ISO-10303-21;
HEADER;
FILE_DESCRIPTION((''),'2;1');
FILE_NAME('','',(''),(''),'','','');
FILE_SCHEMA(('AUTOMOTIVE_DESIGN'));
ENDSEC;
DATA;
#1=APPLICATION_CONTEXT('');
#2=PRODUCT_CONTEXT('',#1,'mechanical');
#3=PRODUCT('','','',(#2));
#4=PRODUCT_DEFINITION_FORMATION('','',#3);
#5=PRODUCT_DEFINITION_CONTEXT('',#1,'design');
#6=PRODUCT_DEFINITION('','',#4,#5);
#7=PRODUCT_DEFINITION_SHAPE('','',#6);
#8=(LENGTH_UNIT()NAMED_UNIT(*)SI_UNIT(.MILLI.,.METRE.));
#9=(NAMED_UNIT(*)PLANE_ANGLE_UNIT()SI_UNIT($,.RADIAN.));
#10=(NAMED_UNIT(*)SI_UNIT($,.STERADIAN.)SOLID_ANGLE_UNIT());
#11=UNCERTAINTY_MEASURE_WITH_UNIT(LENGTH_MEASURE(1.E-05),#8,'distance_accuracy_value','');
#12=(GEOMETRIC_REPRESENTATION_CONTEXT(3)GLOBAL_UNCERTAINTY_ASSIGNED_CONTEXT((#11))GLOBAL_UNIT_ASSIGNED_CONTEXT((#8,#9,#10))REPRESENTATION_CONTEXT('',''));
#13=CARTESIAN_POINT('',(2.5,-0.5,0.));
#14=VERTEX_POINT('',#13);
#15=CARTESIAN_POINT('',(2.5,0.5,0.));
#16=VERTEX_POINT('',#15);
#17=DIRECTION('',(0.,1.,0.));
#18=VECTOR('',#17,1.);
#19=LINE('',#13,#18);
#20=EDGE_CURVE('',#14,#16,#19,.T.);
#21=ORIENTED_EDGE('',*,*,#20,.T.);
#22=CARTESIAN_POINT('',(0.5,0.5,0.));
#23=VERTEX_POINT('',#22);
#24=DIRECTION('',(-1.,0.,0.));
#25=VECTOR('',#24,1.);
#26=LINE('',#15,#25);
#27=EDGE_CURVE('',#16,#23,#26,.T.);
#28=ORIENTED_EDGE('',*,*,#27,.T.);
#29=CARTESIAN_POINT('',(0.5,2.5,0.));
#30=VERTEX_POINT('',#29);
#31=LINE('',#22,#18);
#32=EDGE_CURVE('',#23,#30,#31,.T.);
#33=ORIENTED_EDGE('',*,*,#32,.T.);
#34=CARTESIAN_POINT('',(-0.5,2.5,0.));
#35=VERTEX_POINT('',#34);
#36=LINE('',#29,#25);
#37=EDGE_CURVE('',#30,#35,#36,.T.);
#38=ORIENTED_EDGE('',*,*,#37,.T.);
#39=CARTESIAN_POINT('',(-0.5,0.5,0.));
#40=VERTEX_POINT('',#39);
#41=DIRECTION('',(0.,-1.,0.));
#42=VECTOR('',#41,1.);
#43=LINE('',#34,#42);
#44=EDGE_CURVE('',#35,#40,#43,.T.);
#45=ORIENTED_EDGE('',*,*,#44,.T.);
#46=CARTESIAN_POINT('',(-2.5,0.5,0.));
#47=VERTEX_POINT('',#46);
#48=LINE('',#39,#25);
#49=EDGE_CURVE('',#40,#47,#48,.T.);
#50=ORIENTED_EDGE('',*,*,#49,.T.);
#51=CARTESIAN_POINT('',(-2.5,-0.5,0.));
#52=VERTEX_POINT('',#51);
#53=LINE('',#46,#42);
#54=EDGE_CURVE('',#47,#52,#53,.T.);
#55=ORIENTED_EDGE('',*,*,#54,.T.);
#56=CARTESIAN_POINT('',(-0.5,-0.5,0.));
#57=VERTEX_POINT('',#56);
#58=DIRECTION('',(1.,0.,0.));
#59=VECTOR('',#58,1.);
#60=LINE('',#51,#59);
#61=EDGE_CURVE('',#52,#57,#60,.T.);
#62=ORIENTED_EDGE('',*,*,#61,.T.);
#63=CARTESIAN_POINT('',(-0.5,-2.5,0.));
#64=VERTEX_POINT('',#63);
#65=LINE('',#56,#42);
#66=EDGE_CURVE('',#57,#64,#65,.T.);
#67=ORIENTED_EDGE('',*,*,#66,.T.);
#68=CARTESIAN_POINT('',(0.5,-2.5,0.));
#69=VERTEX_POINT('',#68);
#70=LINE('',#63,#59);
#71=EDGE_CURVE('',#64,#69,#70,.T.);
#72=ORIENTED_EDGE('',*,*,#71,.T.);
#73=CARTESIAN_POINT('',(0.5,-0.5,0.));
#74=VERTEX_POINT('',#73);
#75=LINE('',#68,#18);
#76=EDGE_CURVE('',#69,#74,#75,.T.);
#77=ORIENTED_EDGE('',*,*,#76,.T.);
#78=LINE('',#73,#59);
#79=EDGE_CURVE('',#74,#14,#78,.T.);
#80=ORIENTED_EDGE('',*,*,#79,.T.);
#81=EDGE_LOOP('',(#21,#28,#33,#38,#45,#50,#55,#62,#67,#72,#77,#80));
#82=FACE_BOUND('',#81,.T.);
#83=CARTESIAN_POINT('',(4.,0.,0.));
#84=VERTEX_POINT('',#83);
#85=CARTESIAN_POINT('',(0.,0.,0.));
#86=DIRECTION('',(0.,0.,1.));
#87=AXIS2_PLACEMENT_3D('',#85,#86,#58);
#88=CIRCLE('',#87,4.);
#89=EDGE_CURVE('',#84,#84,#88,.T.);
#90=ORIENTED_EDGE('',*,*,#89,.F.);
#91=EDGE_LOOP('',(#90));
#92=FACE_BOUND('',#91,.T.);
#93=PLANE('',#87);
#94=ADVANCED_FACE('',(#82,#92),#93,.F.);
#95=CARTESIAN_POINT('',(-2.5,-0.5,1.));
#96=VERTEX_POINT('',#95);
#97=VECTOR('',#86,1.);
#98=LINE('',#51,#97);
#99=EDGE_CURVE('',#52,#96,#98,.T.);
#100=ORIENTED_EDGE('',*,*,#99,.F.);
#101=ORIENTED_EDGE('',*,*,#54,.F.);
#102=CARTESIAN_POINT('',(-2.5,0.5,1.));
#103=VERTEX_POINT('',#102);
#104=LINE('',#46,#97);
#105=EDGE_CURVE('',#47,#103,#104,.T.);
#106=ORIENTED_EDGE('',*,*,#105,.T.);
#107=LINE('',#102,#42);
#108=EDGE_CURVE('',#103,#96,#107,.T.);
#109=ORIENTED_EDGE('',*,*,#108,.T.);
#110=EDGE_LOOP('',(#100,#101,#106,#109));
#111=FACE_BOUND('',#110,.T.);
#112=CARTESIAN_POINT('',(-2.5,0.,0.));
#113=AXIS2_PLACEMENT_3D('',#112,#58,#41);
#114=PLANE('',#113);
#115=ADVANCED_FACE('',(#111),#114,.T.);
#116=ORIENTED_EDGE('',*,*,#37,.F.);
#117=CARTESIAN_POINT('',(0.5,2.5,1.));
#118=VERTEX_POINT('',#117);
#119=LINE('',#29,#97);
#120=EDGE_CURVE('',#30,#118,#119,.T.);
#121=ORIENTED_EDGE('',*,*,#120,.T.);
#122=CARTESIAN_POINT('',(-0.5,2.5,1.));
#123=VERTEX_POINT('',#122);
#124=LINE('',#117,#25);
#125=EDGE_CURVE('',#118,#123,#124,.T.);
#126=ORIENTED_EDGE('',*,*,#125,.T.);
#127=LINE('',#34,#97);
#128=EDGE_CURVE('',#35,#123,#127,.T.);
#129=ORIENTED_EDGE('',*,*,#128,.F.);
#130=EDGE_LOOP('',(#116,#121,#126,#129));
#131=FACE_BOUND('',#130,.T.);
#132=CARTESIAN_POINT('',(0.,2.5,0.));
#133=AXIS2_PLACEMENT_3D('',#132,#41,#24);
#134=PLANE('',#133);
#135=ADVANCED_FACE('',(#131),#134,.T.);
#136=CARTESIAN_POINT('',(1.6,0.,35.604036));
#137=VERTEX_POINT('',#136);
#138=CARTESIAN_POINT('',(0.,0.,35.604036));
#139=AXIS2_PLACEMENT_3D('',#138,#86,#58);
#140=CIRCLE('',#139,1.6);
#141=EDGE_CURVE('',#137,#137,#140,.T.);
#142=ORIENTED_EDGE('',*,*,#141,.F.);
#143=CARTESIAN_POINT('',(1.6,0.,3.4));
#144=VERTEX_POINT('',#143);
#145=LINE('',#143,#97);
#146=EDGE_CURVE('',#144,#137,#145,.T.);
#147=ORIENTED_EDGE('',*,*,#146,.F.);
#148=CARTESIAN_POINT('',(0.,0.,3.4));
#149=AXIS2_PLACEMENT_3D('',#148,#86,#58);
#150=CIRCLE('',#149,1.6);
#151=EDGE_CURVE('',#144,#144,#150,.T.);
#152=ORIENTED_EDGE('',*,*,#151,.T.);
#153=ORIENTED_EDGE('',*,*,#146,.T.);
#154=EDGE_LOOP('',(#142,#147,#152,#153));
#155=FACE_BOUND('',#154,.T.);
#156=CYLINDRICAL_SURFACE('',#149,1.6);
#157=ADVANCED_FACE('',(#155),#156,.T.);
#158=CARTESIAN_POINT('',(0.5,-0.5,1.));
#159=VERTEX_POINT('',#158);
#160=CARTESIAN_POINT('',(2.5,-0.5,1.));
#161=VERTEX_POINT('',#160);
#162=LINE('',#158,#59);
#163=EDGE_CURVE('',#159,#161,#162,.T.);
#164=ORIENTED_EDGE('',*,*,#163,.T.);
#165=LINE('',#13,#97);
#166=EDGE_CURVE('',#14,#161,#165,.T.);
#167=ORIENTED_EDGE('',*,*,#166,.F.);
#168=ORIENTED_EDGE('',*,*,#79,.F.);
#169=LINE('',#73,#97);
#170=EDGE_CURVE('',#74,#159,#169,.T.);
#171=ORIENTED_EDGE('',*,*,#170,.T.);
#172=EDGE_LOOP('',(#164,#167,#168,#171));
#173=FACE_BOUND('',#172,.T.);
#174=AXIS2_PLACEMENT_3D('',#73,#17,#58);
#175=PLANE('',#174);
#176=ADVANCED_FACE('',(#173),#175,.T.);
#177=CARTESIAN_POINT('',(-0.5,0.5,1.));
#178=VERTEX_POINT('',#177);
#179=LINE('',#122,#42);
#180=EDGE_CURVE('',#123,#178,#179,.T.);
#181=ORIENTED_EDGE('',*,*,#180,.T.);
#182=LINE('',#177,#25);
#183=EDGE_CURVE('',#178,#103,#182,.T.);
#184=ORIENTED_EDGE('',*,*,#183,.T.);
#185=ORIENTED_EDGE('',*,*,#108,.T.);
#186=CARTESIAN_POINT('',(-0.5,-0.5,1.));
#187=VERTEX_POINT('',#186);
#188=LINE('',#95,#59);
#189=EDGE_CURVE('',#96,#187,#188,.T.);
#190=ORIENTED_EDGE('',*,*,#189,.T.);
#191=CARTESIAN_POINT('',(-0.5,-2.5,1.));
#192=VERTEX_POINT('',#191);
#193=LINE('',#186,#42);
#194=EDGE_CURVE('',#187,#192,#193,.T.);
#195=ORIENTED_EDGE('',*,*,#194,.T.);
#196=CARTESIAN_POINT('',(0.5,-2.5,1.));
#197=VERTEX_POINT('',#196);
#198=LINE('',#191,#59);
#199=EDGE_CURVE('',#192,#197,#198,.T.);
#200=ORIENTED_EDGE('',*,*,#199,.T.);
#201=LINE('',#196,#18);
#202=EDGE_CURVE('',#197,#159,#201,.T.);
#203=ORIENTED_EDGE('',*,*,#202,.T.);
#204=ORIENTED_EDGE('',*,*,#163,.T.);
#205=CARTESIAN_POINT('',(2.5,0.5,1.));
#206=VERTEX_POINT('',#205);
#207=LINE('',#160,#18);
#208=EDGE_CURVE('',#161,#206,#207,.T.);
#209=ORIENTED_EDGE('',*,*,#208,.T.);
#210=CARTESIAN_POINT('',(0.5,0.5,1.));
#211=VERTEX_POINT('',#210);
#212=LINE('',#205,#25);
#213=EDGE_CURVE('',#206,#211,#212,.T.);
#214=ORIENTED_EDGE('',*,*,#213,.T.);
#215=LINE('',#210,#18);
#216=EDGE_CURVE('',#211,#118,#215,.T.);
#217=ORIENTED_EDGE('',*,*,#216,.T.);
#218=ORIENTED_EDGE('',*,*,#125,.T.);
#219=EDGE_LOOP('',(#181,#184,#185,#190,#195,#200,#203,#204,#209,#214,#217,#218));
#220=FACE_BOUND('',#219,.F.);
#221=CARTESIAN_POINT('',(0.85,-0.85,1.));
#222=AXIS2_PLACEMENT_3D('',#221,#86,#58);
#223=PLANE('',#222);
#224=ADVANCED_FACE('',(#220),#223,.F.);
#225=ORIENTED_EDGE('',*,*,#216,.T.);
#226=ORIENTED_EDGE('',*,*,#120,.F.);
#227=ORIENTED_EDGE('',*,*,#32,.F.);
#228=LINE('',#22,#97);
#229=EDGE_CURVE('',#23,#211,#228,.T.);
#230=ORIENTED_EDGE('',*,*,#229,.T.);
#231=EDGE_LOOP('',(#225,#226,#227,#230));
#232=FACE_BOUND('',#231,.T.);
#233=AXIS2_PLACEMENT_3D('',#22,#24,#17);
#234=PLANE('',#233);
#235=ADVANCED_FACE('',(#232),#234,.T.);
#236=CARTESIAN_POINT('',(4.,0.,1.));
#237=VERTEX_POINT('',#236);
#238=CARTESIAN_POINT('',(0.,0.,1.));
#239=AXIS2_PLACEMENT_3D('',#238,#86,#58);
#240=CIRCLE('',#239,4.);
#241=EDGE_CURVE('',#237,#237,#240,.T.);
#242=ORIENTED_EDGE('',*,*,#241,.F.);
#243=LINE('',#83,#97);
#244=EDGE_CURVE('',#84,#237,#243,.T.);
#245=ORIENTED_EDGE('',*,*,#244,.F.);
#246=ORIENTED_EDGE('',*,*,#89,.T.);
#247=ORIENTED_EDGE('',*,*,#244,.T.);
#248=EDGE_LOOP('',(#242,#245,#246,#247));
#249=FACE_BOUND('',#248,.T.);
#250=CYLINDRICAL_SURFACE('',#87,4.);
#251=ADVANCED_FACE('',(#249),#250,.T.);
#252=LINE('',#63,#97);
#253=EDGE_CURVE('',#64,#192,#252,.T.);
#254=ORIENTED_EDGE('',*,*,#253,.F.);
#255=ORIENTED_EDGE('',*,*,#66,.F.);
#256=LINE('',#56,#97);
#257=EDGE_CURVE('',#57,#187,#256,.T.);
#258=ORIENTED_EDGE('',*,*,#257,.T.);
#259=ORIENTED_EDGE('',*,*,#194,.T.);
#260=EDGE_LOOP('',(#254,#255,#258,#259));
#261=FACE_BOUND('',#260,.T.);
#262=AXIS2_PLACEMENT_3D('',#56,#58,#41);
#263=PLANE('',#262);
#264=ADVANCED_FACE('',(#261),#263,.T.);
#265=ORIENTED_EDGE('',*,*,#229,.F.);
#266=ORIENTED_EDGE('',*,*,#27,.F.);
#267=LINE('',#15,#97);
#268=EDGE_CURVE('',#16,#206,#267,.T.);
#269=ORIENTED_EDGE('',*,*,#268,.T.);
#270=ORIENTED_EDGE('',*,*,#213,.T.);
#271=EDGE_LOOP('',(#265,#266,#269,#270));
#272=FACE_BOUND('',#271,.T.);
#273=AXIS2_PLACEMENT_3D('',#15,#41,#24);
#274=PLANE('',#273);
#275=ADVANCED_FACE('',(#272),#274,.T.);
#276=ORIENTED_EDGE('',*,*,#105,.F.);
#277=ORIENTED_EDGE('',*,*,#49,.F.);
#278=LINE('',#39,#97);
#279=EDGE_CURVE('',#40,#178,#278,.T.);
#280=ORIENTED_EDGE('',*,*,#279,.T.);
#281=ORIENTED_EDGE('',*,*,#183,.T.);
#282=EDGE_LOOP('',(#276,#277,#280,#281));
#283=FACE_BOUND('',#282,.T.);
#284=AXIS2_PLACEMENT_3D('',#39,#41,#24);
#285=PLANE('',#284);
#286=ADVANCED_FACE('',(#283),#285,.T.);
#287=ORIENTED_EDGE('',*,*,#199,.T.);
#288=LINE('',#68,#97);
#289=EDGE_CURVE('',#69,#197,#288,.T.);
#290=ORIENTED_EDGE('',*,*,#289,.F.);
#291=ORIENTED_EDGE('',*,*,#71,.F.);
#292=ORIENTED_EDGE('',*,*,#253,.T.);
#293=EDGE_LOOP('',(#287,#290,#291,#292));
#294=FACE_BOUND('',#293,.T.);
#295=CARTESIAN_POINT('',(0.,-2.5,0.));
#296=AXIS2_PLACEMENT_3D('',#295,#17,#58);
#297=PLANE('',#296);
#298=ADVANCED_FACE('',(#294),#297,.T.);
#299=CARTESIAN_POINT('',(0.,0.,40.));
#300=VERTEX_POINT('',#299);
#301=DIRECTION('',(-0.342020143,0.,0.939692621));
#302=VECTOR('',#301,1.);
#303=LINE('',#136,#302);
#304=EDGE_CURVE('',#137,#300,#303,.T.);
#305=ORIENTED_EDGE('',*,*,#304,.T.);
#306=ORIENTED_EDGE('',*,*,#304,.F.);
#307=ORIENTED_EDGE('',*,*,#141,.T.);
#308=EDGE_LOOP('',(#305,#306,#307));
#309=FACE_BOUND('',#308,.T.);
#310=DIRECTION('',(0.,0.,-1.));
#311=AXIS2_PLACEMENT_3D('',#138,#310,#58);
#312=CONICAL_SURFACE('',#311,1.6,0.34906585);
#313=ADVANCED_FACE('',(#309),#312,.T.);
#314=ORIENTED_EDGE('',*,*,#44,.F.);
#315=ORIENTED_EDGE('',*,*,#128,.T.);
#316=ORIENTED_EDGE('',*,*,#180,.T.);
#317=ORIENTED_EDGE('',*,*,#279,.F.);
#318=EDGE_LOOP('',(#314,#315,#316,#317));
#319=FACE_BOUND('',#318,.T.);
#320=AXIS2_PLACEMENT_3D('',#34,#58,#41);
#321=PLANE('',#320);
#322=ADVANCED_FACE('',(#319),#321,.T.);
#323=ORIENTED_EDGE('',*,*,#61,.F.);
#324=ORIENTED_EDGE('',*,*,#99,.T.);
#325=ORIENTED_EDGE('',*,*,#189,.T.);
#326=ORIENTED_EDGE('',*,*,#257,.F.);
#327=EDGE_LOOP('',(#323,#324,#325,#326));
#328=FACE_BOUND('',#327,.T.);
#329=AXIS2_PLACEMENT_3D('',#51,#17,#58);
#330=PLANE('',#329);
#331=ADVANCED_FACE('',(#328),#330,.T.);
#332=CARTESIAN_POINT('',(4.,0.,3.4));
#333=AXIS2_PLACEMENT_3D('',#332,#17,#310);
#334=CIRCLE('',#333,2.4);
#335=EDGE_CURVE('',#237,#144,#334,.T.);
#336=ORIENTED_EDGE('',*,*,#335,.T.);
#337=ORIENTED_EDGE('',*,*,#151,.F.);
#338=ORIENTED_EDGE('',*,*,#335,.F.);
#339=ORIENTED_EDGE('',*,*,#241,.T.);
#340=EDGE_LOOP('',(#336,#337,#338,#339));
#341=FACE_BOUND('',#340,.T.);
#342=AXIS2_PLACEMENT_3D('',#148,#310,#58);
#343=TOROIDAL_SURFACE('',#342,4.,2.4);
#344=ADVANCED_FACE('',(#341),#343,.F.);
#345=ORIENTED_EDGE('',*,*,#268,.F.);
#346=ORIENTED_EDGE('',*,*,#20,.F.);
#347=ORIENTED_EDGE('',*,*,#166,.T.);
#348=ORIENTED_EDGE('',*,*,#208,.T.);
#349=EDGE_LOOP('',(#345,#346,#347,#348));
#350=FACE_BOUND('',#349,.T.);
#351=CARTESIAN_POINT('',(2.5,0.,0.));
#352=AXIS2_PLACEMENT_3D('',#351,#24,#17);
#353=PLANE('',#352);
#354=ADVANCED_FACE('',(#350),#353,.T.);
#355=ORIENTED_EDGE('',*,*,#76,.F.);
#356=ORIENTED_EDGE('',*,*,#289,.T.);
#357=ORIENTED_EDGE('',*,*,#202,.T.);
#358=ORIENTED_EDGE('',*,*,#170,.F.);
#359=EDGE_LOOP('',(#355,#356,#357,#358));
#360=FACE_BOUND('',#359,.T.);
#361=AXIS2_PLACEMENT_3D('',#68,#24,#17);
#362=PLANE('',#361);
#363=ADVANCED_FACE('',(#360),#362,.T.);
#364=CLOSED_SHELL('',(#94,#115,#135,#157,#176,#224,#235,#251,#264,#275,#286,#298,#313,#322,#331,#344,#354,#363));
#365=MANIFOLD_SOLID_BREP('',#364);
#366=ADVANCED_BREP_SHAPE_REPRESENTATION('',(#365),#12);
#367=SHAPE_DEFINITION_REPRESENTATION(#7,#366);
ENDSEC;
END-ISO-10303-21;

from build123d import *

# Parameters (mm, degrees)
F3_DEPTH        = 1
F3_COPIES_COUNT = 4


# Not quite as in the source:
# - a pattern or mirror of a feature is missing from the dataset's text; its kind, count and spacing are read off the source's solid


with BuildPart() as f1:
    # F0 (on Front) → F1 (revolve)
    with BuildSketch(Plane.XZ):
        with BuildLine():
            Line((1.6, 35.6040361289), (0, 40))
            Line((0, 40), (0, 0))
            Line((0, 0), (4, 0))
            Line((4, 0), (4, 1))
            ThreePointArc((4, 1), (2.3029437252, 1.7029437252), (1.6, 3.4))
            Line((1.6, 3.4), (1.6, 35.6040361289))
        make_face()
    revolve(axis=Axis((0, 0, 20), (0, 0, 1)))

    # F2 (on Top) → F3 (cut)
    with BuildSketch(Plane.XY):
        Polygon((2.5, 0), (0, 0), (0, -2.5), (0.5, -2.5), (0.5, -0.5), (2.5, -0.5), align=None)
    f3 = extrude(amount=F3_DEPTH, mode=Mode.SUBTRACT)

    # F3_copies: F3 ×4 about axis
    f3_copies_axis = Axis((0, 0, 0), (0, 0, 1))
    for i in range(1, F3_COPIES_COUNT):
        add(f3.rotate(f3_copies_axis, i * 360 / F3_COPIES_COUNT), mode=Mode.SUBTRACT)


solid = f1.part
